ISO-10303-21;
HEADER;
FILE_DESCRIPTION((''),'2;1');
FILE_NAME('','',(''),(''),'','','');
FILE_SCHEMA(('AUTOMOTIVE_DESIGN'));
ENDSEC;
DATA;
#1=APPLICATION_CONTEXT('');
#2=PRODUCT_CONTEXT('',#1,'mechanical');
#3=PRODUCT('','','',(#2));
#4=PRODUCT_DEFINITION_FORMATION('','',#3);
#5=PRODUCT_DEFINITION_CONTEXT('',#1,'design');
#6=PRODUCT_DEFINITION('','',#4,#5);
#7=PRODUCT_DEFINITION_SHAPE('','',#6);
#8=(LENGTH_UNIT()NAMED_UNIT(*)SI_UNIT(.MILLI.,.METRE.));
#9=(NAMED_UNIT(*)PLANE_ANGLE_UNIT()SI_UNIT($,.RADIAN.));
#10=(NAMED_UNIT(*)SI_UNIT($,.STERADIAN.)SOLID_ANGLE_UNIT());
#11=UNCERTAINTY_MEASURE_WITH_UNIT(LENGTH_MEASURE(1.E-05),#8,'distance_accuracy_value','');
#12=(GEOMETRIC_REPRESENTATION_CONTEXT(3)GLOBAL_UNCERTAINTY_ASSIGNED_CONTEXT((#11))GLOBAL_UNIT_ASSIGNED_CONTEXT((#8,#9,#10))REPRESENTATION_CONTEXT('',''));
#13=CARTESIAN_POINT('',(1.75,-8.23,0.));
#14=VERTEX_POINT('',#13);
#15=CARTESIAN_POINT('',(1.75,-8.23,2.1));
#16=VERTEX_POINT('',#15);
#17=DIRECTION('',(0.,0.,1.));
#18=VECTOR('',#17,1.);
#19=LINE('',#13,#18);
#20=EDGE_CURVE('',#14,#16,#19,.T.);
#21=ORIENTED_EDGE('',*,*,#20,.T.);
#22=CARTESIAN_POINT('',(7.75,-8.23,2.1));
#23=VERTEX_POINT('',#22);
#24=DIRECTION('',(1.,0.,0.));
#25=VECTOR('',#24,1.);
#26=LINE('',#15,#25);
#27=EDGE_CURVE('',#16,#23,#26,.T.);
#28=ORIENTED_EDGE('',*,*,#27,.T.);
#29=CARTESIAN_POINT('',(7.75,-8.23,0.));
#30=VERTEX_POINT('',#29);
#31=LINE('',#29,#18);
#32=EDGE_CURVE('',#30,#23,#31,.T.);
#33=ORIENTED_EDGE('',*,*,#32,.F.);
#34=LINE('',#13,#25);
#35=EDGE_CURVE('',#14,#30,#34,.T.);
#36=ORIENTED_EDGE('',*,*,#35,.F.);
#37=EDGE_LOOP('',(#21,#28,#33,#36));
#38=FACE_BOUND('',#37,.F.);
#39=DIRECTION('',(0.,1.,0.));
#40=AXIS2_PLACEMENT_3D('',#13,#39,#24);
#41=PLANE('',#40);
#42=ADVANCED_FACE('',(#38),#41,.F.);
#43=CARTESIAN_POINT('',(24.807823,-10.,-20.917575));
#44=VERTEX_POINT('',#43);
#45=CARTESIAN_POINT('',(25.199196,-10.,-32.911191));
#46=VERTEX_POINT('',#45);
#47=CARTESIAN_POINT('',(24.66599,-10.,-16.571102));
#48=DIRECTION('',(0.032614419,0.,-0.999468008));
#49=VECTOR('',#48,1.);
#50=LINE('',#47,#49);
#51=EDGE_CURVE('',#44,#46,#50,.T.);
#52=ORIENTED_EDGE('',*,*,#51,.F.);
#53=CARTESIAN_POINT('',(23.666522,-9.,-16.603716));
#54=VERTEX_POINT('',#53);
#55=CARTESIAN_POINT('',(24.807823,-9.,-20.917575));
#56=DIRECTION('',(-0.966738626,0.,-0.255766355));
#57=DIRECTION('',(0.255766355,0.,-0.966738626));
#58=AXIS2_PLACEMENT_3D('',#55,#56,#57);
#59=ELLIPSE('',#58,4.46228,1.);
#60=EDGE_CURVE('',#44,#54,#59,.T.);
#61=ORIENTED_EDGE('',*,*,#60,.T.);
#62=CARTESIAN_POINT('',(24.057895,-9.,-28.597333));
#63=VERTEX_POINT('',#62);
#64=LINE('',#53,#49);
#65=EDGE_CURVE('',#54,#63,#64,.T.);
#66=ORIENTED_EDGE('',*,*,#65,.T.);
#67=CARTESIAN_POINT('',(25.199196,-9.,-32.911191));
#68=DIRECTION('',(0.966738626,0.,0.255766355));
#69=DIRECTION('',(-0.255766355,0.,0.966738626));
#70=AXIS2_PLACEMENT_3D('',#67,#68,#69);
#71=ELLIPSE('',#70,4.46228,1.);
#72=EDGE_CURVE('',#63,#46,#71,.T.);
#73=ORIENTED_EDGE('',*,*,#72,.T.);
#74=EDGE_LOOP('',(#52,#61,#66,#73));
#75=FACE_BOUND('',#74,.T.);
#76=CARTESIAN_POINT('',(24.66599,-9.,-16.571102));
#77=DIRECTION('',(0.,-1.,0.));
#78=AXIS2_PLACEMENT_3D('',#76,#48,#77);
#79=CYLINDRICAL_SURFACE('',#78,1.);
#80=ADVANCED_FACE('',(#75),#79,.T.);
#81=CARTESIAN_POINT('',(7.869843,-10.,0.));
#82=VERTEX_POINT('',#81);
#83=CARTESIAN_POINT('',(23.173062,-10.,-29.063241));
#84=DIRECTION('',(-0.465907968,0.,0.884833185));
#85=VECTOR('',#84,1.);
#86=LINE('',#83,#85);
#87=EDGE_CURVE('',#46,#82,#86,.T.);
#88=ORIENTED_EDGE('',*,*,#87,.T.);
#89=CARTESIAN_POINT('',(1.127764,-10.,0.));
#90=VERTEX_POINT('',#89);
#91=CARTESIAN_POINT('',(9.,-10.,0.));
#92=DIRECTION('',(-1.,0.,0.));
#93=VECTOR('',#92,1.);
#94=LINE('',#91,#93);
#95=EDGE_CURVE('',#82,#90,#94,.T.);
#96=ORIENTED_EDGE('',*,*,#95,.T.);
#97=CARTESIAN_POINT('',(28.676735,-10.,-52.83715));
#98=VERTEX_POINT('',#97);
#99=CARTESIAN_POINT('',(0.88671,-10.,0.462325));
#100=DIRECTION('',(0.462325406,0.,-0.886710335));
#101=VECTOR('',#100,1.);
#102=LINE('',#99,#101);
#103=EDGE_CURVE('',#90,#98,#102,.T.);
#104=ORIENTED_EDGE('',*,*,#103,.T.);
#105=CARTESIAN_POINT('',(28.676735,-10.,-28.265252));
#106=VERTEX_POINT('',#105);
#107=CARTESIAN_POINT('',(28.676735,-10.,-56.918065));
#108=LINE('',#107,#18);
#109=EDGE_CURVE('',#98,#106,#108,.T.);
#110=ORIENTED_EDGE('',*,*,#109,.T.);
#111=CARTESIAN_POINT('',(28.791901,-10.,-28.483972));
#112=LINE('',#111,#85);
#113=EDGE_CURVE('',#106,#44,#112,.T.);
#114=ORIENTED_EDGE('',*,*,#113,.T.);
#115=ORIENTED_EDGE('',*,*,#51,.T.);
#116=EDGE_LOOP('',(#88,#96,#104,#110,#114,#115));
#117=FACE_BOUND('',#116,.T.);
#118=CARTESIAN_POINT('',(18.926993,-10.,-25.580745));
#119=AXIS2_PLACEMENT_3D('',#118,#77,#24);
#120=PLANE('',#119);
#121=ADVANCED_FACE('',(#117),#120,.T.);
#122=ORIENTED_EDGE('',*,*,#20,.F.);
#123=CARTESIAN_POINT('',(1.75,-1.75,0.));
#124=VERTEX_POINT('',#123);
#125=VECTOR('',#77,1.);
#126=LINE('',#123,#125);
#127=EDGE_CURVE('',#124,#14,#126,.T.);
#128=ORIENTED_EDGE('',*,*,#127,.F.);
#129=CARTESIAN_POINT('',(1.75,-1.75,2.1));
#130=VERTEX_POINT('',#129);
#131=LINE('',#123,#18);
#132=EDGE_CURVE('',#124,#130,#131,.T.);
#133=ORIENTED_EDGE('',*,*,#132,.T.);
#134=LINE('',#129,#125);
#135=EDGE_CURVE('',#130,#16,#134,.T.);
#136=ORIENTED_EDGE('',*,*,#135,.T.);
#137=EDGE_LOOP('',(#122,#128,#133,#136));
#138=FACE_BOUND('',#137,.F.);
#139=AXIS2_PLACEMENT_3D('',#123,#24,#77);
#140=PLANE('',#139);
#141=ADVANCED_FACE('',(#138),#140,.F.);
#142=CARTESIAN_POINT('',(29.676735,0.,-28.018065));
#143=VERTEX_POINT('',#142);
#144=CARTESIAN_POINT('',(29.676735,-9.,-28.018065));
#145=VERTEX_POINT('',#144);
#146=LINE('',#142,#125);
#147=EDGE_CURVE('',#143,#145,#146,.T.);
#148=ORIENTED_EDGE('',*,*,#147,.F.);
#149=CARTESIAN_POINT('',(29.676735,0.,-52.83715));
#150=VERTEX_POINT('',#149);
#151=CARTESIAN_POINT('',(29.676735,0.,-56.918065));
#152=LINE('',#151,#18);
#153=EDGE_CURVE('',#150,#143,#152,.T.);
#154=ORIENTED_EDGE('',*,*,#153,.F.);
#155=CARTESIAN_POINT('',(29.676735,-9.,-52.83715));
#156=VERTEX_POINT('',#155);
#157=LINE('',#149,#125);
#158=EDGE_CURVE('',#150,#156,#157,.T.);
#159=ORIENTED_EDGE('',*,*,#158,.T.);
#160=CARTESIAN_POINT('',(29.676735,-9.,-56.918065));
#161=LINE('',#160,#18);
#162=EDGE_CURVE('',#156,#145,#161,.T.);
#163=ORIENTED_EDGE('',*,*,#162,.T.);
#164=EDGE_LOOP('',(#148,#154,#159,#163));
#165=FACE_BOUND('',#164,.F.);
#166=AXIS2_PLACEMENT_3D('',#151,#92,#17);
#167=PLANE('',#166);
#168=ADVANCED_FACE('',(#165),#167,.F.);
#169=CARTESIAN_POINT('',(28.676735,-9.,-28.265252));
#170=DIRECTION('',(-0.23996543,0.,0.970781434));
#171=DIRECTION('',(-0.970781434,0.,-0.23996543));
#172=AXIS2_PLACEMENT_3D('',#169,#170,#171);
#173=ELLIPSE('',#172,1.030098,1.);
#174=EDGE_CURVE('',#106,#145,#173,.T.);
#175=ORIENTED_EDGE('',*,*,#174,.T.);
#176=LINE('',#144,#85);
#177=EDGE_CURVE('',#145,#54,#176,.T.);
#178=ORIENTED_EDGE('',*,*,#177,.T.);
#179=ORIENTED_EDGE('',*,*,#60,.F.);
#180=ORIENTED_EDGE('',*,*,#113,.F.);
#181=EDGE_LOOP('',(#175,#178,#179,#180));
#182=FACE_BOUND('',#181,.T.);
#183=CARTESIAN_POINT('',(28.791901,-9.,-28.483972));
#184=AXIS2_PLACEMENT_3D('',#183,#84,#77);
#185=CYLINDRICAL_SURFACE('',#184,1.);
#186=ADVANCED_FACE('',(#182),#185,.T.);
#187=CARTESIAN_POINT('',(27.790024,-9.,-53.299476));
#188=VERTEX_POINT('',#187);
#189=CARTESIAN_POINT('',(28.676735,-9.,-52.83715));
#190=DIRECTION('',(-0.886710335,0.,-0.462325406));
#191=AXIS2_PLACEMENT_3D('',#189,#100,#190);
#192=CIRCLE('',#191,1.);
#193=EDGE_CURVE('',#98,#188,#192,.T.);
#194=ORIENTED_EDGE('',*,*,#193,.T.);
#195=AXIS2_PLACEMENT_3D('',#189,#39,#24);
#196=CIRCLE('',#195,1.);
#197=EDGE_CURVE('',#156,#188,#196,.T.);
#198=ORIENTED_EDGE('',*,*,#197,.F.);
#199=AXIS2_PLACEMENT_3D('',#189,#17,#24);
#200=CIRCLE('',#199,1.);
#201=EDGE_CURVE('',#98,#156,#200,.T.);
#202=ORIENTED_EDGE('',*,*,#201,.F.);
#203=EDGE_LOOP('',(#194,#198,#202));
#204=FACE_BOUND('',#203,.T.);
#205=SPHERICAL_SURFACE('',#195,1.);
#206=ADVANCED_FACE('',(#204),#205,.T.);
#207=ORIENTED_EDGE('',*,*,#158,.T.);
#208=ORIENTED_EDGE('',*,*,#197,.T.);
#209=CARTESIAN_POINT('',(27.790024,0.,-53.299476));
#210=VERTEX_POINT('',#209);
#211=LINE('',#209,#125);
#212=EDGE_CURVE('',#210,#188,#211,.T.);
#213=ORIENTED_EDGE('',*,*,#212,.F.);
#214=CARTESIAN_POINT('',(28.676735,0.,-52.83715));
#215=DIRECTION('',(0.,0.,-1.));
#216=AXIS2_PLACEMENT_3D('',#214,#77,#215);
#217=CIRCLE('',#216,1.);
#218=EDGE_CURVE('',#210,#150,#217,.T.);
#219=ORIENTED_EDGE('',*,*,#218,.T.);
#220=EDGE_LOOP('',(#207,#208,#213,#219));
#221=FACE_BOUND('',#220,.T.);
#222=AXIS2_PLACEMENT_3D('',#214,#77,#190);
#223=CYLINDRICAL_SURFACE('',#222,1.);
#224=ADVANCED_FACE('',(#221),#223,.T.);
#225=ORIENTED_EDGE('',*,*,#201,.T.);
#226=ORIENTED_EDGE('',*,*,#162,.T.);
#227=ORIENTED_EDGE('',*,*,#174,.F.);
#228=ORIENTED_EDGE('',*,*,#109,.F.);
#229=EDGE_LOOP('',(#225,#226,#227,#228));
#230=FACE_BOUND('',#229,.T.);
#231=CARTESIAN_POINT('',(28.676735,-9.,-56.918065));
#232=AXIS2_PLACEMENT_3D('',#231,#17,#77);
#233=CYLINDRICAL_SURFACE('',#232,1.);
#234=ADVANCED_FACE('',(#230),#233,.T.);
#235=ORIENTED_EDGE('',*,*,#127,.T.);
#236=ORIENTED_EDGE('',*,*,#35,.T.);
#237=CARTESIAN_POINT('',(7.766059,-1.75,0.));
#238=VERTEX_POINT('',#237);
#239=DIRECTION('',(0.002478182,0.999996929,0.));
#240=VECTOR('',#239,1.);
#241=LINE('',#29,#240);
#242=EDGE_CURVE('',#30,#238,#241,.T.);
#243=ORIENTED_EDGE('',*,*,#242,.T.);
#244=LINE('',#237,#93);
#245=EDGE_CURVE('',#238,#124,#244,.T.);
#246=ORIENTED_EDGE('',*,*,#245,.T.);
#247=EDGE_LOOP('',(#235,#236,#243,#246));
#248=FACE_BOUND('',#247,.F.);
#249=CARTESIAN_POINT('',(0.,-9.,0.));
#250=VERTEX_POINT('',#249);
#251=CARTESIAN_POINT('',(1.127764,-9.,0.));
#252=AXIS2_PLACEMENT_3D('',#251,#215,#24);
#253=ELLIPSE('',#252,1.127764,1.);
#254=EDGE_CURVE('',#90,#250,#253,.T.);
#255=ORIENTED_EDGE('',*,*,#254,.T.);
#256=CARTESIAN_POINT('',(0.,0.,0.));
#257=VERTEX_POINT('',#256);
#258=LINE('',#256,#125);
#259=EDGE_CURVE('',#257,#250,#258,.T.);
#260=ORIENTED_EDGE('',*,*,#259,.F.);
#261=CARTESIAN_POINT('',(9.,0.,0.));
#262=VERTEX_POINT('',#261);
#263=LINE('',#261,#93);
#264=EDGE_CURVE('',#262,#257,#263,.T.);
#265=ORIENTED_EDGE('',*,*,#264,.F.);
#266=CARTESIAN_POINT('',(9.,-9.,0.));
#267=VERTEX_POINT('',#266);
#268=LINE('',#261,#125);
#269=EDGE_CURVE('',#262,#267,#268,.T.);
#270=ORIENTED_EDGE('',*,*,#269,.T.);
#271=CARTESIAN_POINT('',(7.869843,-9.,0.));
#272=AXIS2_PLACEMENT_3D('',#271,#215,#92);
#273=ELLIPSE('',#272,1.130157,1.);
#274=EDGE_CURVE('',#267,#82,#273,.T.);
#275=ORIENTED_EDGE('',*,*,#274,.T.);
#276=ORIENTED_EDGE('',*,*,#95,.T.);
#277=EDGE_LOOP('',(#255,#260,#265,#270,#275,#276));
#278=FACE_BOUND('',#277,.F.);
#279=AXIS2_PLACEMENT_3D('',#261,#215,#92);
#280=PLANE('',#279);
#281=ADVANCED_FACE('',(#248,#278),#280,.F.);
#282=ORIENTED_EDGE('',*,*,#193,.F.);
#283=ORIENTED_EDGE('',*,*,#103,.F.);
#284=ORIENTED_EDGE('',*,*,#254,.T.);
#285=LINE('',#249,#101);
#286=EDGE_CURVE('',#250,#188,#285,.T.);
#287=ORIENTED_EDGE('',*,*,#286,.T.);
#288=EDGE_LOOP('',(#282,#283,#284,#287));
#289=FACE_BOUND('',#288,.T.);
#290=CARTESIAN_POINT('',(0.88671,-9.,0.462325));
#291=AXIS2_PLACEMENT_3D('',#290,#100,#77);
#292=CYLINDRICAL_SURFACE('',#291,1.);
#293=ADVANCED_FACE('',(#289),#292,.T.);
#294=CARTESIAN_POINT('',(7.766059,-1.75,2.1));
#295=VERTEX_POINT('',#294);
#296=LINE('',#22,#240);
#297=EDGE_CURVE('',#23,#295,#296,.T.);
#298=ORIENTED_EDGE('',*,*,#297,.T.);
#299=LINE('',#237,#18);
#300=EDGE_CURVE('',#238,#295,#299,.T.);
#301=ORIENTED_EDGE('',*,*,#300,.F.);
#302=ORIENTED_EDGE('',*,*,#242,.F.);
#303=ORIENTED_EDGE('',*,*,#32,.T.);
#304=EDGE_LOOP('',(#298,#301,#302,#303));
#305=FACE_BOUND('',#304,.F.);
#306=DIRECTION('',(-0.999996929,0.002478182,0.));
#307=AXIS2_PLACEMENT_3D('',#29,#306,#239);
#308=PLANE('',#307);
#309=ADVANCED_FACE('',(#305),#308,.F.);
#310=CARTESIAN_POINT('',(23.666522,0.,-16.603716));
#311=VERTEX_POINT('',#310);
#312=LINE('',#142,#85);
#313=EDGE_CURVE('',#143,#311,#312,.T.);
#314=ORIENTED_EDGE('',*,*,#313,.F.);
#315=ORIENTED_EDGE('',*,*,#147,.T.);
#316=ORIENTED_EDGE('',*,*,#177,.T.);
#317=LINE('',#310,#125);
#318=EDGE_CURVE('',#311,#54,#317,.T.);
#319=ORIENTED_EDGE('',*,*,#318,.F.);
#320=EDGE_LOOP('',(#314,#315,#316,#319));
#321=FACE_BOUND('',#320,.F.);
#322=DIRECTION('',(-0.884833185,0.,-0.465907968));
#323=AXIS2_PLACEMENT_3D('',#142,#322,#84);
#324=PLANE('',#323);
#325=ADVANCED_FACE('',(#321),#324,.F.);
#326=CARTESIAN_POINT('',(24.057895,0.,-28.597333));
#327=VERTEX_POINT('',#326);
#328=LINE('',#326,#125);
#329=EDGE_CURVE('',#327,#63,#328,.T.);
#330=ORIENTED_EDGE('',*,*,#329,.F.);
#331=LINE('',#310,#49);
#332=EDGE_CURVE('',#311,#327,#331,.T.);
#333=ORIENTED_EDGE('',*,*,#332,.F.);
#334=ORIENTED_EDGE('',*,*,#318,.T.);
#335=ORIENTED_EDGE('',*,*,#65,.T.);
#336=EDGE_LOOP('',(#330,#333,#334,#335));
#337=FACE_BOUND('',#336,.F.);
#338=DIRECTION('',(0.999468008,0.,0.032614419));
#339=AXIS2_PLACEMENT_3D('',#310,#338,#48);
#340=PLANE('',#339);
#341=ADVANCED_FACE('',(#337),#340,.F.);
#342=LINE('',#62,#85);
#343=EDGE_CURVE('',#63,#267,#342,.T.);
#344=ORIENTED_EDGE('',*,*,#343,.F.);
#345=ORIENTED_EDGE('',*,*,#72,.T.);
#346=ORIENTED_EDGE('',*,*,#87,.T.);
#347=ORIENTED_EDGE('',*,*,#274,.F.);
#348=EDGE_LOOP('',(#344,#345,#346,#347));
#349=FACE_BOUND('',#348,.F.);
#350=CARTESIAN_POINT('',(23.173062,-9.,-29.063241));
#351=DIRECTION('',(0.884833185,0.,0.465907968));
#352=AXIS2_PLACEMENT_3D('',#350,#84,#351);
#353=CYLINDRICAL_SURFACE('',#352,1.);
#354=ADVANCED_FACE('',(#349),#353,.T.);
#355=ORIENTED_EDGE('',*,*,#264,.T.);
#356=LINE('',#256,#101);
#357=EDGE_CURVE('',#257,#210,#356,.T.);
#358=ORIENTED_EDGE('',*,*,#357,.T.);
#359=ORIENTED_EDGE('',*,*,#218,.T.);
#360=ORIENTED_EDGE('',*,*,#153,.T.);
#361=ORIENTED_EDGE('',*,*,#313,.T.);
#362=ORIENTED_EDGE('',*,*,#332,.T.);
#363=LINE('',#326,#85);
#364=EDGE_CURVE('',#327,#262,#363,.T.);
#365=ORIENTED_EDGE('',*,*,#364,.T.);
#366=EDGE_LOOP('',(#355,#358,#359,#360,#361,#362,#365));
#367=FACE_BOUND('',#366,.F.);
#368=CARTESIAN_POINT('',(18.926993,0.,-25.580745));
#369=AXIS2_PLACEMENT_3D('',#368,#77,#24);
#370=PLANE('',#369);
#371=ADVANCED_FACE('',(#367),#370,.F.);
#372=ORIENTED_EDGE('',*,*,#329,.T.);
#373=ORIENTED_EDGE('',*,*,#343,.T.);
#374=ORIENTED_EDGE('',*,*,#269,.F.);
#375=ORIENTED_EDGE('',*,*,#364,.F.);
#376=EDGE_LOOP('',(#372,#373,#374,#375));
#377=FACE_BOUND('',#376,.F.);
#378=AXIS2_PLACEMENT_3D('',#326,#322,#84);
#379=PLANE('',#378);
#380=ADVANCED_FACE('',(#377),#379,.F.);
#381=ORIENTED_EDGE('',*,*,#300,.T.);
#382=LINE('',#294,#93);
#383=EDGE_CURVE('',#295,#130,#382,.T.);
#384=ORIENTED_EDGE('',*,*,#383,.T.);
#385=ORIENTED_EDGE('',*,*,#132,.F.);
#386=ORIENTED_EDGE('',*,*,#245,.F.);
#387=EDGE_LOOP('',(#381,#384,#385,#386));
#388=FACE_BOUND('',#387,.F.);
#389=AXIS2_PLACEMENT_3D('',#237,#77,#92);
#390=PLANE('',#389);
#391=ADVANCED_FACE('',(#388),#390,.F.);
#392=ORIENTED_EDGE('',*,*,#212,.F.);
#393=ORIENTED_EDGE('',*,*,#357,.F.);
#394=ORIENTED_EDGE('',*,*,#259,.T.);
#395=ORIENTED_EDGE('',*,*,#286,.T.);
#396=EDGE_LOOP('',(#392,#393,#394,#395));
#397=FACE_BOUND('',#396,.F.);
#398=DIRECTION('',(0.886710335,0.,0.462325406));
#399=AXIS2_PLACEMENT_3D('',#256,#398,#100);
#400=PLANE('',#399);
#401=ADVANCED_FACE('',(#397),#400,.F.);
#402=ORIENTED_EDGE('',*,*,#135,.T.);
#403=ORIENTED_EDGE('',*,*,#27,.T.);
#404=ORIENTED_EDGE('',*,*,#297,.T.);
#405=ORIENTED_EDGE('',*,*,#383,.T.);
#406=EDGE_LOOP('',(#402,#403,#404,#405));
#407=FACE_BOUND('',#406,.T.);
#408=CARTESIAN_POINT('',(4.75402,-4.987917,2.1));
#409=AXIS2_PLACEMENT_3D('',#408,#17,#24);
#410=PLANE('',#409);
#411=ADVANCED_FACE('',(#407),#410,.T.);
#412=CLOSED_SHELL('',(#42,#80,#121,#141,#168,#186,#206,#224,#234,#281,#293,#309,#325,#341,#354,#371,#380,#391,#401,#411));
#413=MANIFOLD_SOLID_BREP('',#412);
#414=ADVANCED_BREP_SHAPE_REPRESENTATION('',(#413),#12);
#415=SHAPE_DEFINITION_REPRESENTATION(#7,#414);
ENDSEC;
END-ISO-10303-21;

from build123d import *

# Parameters (mm, degrees)
F1_DEPTH = 10
F3_DEPTH = 2.1
F5_R     = 1


# Not quite as in the source:
# - a feature of the source that left no trace in its solid (it failed there, or was rolled back) is left out


with BuildPart() as f1:
    # F0 (on Front) → F1 (new body)
    with BuildSketch(Plane.XZ):
        Polygon((9, 0), (0, 0), (29.6767346319, -56.9180645261), (29.6767346319, -28.0180645261), (23.6665218482, -16.6037164372), (24.0578948756, -28.5973325372), align=None)
    extrude(amount=F1_DEPTH)

    # F2 (on face) → F3 (join)
    with BuildSketch(Plane.XY):
        Polygon((7.7660586685, -1.75), (1.75, -1.75), (1.75, -8.23), (7.75, -8.23), align=None)
    extrude(amount=F3_DEPTH)

    # F5
    f5_edges = [f1.edges().sort_by_distance(p)[0] for p in [
        (16.528947, -10, -14.298666),
        (23.862208, -10, -22.600524),
        (26.671628, -10, -22.31089),
        (29.676735, -10, -42.468065),
        (14.838367, -10, -28.459032),
        (29.676735, -5, -56.918065),
    ]]
    fillet(f5_edges, radius=F5_R)


solid = f1.part
